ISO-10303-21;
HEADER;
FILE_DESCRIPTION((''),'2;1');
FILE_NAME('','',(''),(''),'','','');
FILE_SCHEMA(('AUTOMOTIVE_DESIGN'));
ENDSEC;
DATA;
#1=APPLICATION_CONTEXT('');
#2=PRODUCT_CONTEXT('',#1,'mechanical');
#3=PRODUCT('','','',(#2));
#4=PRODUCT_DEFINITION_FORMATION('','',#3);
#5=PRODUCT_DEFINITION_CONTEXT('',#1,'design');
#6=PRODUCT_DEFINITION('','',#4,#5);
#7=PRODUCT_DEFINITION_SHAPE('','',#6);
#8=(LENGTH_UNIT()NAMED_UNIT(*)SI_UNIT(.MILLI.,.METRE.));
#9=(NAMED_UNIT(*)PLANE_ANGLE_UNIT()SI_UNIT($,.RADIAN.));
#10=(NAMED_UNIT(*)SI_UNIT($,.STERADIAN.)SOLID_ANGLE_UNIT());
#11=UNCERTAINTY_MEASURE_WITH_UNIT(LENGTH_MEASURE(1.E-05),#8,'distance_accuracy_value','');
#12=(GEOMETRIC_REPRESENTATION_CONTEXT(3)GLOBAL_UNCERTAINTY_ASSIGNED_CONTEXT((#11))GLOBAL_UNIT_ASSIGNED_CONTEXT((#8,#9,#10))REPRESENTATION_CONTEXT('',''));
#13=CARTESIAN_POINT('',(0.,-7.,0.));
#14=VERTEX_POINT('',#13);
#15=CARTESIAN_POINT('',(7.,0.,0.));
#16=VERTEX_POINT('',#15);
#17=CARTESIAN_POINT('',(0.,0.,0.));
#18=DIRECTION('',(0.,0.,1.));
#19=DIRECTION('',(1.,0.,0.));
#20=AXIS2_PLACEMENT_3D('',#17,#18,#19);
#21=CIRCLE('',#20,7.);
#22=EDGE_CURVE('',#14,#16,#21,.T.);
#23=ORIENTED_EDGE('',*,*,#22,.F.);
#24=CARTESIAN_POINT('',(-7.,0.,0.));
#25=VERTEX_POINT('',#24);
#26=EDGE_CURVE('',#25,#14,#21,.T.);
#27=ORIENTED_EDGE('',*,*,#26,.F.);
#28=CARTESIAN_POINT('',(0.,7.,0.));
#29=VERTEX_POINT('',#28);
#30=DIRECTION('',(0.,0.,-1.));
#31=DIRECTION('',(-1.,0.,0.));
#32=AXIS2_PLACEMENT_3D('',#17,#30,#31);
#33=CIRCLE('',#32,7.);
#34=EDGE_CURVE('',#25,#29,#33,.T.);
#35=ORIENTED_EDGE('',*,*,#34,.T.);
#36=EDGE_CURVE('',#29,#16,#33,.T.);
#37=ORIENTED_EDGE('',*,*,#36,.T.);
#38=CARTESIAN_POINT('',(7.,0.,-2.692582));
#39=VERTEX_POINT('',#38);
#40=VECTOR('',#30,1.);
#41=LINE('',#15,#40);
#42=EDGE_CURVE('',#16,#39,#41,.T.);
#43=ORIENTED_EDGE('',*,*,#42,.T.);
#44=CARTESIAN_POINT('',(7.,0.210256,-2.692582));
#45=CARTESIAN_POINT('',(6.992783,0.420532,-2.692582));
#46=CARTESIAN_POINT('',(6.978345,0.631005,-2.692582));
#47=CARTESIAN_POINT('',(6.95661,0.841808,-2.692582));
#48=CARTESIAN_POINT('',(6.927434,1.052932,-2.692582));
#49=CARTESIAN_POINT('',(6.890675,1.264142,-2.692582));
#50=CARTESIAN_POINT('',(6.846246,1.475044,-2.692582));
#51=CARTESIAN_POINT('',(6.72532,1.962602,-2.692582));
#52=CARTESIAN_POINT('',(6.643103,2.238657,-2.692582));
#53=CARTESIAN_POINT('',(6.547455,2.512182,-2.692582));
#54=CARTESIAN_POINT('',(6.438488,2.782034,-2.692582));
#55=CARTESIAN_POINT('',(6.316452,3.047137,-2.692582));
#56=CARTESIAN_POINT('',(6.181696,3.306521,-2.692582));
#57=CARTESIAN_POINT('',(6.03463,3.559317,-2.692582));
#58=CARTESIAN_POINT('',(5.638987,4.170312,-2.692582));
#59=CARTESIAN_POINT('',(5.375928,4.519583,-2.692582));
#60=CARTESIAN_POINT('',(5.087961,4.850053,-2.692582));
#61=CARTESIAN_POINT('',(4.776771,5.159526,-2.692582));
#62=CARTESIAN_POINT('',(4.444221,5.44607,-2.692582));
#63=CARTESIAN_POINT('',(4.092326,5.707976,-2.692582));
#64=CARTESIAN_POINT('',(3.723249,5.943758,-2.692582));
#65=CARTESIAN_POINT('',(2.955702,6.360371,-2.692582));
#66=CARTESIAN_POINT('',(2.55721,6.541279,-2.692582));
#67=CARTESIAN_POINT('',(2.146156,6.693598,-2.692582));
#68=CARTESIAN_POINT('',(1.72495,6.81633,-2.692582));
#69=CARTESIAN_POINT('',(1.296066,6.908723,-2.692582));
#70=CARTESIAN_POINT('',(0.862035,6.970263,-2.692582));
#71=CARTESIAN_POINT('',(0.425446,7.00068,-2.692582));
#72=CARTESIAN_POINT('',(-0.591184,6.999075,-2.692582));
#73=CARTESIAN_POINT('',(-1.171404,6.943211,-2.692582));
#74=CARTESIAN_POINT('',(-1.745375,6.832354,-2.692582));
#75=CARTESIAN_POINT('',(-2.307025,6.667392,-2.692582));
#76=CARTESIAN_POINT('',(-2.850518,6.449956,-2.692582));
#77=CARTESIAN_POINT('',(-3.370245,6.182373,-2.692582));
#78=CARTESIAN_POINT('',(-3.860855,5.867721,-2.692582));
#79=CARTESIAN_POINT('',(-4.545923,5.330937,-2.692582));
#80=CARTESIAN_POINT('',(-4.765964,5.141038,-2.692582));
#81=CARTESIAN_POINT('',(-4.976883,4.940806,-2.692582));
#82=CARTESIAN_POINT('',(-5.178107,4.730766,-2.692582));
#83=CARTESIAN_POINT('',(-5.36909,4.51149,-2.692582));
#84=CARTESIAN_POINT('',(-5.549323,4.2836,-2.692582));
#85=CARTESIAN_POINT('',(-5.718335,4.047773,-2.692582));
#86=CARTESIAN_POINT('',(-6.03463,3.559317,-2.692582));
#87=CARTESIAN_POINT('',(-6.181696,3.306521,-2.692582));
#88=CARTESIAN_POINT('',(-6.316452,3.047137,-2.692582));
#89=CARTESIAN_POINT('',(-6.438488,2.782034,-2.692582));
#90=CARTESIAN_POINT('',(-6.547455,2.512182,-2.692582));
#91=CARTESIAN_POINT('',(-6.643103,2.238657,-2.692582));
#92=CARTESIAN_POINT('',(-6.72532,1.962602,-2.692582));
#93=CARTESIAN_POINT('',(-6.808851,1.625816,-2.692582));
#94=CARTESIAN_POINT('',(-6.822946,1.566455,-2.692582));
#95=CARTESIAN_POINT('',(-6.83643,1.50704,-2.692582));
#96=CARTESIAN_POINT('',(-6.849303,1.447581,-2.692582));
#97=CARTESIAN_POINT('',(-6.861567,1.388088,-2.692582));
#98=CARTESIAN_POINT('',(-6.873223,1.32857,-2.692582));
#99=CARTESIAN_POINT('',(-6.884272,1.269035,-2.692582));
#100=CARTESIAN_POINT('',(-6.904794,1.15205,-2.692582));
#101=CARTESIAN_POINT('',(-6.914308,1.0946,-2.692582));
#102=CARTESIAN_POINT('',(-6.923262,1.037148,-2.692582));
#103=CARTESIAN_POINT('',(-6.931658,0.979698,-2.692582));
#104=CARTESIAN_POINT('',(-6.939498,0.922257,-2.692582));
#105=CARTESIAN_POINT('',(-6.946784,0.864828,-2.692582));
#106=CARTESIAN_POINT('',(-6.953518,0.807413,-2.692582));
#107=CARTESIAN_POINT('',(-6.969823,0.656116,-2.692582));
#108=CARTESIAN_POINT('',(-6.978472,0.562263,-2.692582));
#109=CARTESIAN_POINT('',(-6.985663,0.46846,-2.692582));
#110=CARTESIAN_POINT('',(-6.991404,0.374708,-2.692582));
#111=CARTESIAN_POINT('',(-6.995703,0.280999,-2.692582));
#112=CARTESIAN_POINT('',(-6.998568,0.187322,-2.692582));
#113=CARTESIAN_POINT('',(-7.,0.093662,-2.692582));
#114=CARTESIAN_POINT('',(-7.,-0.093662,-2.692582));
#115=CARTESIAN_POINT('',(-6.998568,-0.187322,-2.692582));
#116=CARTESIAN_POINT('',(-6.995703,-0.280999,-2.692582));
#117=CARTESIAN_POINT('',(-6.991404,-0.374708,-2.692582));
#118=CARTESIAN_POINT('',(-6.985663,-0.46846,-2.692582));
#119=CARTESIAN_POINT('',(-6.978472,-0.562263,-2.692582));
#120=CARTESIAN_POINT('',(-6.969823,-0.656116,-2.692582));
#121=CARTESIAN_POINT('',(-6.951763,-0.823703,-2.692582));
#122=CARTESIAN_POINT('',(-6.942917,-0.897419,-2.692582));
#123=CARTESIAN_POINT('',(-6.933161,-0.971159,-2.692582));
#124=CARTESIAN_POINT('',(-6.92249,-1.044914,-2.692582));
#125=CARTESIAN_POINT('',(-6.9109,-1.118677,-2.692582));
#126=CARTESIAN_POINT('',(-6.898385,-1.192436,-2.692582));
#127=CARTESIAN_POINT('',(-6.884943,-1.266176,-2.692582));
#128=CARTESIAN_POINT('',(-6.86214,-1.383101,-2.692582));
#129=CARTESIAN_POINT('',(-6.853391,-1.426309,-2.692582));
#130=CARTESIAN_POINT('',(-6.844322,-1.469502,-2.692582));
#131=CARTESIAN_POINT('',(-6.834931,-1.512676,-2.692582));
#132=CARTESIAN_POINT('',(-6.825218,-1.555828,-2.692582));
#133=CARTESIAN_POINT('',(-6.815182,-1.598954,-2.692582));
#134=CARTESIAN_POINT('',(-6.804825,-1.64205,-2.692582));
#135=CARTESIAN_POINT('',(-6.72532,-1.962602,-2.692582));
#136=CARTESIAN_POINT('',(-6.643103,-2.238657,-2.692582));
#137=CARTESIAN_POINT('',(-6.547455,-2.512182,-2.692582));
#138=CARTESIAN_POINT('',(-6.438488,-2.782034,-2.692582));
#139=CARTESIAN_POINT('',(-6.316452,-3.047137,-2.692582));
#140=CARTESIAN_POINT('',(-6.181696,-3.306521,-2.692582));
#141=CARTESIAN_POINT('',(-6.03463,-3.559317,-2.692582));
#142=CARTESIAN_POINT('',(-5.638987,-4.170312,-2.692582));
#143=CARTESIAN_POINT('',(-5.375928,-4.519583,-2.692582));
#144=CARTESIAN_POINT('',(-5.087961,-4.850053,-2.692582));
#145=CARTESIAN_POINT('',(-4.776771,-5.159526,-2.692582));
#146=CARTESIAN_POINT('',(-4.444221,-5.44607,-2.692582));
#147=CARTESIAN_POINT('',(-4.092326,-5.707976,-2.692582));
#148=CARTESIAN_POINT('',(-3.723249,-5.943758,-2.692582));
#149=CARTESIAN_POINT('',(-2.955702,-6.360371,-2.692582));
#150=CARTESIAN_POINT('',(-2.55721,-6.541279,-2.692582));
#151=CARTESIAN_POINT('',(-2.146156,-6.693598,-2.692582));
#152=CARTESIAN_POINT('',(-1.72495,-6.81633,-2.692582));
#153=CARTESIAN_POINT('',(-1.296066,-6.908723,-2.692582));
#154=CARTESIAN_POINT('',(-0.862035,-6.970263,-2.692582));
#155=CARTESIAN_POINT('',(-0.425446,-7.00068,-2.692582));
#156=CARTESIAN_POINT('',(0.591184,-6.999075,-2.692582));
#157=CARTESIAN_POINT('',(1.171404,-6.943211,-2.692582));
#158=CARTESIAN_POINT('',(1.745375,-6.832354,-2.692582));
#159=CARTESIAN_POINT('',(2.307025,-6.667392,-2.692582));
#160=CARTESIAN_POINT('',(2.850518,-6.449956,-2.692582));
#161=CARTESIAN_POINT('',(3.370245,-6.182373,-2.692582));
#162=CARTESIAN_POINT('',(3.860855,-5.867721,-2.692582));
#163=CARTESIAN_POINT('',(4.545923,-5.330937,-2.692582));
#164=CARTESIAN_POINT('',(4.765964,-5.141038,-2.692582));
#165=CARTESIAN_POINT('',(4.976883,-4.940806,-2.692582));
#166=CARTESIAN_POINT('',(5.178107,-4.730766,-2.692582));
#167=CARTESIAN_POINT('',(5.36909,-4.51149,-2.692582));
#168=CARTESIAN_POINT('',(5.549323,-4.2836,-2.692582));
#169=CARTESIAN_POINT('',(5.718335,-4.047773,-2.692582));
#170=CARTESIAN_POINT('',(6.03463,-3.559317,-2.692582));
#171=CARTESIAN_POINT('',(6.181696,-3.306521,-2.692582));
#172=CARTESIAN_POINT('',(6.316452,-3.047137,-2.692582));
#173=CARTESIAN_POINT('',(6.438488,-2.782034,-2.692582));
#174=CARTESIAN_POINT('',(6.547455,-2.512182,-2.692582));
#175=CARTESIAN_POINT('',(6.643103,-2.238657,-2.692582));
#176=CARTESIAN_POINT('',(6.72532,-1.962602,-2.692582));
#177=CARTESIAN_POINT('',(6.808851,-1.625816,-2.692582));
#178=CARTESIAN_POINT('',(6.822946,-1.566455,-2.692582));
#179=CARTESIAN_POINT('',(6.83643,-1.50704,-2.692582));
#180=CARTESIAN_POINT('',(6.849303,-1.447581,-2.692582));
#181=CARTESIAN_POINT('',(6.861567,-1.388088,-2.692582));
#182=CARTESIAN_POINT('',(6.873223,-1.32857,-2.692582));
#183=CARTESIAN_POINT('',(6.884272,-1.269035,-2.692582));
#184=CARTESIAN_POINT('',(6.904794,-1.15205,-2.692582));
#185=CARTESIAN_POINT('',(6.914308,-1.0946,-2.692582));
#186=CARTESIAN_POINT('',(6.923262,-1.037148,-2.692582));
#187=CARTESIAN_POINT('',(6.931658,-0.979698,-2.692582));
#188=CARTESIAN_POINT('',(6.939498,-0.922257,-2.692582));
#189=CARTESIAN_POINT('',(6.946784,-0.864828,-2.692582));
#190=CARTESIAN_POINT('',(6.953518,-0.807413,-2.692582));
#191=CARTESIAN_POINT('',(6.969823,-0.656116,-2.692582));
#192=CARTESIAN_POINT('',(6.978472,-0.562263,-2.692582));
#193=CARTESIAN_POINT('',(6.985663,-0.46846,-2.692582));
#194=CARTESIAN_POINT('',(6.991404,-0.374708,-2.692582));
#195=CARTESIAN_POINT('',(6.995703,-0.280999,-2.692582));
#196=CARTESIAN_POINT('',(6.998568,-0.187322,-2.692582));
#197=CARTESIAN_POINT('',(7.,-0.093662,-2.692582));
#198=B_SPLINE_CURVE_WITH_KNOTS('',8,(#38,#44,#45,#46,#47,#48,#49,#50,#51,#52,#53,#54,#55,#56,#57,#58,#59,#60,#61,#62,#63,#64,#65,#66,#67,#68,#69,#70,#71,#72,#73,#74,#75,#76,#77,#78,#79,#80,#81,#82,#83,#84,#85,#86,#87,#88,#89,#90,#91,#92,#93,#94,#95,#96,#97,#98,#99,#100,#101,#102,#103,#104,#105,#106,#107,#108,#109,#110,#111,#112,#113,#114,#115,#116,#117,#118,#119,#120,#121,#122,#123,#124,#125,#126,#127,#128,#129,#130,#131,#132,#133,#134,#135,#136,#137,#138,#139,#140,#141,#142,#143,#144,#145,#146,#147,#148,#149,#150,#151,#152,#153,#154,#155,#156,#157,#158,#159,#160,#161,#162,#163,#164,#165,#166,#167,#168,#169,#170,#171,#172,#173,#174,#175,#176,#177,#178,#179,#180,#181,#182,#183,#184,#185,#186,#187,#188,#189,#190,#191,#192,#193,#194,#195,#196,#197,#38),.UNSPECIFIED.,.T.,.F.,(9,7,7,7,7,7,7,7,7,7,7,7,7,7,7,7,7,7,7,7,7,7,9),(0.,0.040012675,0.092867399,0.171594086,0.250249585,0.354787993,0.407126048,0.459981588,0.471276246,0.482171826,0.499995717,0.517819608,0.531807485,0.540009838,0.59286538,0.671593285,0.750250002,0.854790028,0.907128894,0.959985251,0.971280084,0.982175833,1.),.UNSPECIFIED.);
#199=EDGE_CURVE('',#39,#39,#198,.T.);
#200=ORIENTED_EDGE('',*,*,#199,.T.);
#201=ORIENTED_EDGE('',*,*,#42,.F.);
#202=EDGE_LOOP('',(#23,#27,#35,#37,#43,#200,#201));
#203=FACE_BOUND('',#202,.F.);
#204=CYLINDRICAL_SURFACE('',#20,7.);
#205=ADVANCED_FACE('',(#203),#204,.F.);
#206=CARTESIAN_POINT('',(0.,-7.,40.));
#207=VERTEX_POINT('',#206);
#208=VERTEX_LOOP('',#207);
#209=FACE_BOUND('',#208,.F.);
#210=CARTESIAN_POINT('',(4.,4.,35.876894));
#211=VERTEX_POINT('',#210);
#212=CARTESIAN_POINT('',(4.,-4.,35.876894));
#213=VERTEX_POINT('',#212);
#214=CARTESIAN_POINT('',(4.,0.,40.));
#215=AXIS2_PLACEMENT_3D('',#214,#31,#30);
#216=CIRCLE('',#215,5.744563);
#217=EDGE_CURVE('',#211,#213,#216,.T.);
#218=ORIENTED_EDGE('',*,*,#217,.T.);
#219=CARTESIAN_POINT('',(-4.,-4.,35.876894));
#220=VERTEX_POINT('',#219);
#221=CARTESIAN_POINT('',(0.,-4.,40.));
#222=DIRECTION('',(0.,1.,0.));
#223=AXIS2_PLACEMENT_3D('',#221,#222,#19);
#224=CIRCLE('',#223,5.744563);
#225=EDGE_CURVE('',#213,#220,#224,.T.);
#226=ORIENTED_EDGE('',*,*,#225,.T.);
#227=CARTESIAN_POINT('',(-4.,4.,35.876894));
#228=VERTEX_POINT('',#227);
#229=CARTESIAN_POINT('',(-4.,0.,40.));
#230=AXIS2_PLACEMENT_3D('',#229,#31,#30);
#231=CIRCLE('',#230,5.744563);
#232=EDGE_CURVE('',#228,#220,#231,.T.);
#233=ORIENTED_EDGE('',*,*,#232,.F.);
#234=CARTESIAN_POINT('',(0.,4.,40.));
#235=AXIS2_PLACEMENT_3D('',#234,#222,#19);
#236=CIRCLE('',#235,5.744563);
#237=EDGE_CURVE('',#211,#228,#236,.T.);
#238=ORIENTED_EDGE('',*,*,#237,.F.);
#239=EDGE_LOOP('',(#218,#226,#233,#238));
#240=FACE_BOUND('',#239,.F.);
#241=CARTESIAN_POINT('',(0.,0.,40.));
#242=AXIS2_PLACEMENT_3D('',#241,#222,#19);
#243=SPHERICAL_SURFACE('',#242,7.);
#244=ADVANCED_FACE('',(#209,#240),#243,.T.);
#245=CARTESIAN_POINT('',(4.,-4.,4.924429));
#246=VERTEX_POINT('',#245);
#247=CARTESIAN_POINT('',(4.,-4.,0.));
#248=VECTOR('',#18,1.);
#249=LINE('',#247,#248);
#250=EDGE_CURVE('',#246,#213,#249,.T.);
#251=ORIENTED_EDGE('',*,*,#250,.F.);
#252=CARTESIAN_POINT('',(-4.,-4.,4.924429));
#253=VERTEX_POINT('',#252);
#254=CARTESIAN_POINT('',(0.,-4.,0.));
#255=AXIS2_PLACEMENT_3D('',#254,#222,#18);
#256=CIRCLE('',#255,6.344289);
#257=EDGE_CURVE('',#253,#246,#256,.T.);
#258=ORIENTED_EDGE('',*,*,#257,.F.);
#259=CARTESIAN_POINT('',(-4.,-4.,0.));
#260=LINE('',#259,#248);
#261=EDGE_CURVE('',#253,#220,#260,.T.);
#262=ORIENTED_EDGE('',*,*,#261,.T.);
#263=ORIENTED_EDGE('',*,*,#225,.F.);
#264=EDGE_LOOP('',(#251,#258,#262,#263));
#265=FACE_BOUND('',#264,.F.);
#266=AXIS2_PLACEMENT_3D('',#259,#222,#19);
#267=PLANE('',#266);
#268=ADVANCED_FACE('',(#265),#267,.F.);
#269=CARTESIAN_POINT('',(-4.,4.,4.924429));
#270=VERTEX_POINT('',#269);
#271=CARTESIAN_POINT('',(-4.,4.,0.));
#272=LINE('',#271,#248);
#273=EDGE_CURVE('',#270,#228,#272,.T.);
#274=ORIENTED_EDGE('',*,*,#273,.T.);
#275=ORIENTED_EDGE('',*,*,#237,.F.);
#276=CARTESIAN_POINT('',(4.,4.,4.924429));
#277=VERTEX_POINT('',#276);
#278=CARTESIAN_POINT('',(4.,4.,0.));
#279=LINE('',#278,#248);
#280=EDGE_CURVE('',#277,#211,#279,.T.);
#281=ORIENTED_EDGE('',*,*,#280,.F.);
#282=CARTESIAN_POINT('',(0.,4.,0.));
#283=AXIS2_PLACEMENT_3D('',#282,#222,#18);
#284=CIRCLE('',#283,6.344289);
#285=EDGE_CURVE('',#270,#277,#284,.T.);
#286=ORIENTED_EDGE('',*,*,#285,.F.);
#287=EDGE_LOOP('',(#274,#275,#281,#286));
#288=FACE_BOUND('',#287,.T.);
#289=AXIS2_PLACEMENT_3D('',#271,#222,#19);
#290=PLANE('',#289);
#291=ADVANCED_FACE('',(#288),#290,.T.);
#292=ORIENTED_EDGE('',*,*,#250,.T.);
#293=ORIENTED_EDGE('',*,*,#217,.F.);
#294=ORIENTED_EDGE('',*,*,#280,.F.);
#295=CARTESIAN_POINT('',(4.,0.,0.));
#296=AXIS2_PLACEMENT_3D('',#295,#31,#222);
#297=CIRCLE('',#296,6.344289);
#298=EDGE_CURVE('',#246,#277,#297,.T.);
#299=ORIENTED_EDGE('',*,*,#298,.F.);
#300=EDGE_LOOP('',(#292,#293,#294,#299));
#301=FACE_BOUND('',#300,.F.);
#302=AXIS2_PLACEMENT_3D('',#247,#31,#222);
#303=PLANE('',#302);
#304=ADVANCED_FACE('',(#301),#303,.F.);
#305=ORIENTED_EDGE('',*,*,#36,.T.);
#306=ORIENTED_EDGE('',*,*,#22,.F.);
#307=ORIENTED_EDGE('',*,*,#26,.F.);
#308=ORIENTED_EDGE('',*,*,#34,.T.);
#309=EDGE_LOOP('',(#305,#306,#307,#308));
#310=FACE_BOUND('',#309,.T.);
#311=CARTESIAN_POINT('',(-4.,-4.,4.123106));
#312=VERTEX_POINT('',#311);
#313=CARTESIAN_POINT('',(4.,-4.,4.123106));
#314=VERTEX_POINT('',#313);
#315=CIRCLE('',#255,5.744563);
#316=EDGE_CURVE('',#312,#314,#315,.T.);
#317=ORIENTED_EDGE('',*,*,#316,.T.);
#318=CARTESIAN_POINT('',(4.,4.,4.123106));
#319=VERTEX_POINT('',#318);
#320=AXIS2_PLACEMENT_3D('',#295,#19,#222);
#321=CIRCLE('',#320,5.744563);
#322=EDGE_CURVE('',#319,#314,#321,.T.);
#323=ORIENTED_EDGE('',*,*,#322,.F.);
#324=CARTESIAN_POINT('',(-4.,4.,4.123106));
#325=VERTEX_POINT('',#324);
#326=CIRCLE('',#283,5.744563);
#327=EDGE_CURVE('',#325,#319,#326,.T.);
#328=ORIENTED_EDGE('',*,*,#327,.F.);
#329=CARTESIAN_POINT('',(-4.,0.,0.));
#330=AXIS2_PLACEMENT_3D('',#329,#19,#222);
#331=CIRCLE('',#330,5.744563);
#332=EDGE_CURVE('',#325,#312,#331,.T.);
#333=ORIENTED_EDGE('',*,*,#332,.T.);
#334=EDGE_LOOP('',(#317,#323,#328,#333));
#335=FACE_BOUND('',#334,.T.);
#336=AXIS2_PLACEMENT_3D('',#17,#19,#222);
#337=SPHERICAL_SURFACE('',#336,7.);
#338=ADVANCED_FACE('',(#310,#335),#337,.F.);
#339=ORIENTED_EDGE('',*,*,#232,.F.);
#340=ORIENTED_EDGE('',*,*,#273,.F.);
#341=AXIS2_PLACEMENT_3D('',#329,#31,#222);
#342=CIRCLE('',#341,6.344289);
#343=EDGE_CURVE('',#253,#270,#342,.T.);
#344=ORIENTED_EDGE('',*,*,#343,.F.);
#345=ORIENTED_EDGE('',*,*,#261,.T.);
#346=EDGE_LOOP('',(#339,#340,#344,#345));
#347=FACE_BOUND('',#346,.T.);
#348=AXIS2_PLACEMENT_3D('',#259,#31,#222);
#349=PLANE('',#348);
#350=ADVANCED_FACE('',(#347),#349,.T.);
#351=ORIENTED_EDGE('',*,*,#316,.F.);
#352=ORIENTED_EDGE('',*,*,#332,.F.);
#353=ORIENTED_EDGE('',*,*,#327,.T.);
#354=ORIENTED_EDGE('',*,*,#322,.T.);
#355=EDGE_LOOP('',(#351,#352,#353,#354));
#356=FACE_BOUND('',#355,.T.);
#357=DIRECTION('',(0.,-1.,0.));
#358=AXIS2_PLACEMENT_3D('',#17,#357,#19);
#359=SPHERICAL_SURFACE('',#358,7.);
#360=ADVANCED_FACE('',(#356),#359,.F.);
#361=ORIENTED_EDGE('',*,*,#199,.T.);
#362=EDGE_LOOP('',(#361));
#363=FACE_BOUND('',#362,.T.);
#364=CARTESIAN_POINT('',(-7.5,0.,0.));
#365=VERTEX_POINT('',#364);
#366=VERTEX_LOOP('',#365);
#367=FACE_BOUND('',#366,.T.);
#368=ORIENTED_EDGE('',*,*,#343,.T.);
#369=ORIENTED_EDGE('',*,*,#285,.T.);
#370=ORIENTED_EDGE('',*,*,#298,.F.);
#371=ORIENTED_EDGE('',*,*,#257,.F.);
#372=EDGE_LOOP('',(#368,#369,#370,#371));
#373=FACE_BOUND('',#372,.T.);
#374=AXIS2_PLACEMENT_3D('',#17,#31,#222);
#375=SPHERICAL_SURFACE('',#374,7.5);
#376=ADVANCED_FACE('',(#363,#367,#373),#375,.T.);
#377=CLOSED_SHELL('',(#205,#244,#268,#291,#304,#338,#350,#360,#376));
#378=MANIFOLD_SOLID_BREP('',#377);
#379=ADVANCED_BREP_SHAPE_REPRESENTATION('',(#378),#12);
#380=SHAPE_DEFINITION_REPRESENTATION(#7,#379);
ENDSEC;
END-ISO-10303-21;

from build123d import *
from build123d import SkipClean  # not in build123d's __all__

# Parameters (mm, degrees)
F2_W     = 8
F2_H     = 8
F3_DEPTH = 40
F4_R     = 7
F5_DEPTH = 7.5
F6_W     = 4
F6_H     = 8
F8_W     = 4
F8_H     = 8


# Not quite as in the source:
# - a feature names something its author has since deleted; it is built from what else it names


with BuildPart() as f1:
    # F0 (on Top) → F1 (revolve)
    with BuildSketch(Plane.XY):
        with BuildLine():
            Line((7, 0), (7.5, 0))
            ThreePointArc((7.5, 0), (0, 7.5), (-7.5, 0))
            Line((-7.5, 0), (-7, 0))
            ThreePointArc((-7, 0), (0, 7), (7, 0))
        make_face()
    revolve(axis=Axis((0, 0, 0), (-1, 0, 0)))

    # F2 (on Top) → F3 (join)
    with BuildSketch(Plane.XY):
        Rectangle(F2_W, F2_H)
    extrude(amount=F3_DEPTH)

    # F4 (on Top) → F5 (cut)
    with BuildSketch(Plane.XY):
        Circle(F4_R)
    extrude(amount=-F5_DEPTH, mode=Mode.SUBTRACT)

    # F6 (on face) → F7 (revolve, cut)
    with BuildSketch(Plane(origin=(0, 0, 0), x_dir=(1, 0, 0), z_dir=(0, 0, -1))):
        with BuildLine():
            ThreePointArc((0, -7), (7, 0), (0, 7))
            Line((0, 7), (0, 4))
            Line((0, 4), (4, 4))
            Line((4, 4), (4, -4))
            Line((4, -4), (0, -4))
            Line((0, -4), (0, -7))
        make_face()
        with Locations((2, 0)):
            Rectangle(F6_W, F6_H)
    with SkipClean():  # cleaning this boolean's faces spoils the solid; the shape is the same uncleaned
        revolve(axis=Axis((0, 0, 0), (0, 1, 0)), mode=Mode.SUBTRACT)

    # F8 (on face) → F9 (revolve)
    with BuildSketch(Plane.XY.offset(40)):
        with BuildLine():
            ThreePointArc((0, -7), (7, 0), (0, 7))
            Line((0, 7), (0, 4))
            Line((0, 4), (4, 4))
            Line((4, 4), (4, -4))
            Line((4, -4), (0, -4))
            Line((0, -4), (0, -7))
        make_face()
        with Locations((2, 0)):
            Rectangle(F8_W, F8_H)
    with SkipClean():  # cleaning this boolean's faces spoils the solid; the shape is the same uncleaned
        revolve(axis=Axis((0, 0, 40), (0, -1, 0)))


solid = f1.part
